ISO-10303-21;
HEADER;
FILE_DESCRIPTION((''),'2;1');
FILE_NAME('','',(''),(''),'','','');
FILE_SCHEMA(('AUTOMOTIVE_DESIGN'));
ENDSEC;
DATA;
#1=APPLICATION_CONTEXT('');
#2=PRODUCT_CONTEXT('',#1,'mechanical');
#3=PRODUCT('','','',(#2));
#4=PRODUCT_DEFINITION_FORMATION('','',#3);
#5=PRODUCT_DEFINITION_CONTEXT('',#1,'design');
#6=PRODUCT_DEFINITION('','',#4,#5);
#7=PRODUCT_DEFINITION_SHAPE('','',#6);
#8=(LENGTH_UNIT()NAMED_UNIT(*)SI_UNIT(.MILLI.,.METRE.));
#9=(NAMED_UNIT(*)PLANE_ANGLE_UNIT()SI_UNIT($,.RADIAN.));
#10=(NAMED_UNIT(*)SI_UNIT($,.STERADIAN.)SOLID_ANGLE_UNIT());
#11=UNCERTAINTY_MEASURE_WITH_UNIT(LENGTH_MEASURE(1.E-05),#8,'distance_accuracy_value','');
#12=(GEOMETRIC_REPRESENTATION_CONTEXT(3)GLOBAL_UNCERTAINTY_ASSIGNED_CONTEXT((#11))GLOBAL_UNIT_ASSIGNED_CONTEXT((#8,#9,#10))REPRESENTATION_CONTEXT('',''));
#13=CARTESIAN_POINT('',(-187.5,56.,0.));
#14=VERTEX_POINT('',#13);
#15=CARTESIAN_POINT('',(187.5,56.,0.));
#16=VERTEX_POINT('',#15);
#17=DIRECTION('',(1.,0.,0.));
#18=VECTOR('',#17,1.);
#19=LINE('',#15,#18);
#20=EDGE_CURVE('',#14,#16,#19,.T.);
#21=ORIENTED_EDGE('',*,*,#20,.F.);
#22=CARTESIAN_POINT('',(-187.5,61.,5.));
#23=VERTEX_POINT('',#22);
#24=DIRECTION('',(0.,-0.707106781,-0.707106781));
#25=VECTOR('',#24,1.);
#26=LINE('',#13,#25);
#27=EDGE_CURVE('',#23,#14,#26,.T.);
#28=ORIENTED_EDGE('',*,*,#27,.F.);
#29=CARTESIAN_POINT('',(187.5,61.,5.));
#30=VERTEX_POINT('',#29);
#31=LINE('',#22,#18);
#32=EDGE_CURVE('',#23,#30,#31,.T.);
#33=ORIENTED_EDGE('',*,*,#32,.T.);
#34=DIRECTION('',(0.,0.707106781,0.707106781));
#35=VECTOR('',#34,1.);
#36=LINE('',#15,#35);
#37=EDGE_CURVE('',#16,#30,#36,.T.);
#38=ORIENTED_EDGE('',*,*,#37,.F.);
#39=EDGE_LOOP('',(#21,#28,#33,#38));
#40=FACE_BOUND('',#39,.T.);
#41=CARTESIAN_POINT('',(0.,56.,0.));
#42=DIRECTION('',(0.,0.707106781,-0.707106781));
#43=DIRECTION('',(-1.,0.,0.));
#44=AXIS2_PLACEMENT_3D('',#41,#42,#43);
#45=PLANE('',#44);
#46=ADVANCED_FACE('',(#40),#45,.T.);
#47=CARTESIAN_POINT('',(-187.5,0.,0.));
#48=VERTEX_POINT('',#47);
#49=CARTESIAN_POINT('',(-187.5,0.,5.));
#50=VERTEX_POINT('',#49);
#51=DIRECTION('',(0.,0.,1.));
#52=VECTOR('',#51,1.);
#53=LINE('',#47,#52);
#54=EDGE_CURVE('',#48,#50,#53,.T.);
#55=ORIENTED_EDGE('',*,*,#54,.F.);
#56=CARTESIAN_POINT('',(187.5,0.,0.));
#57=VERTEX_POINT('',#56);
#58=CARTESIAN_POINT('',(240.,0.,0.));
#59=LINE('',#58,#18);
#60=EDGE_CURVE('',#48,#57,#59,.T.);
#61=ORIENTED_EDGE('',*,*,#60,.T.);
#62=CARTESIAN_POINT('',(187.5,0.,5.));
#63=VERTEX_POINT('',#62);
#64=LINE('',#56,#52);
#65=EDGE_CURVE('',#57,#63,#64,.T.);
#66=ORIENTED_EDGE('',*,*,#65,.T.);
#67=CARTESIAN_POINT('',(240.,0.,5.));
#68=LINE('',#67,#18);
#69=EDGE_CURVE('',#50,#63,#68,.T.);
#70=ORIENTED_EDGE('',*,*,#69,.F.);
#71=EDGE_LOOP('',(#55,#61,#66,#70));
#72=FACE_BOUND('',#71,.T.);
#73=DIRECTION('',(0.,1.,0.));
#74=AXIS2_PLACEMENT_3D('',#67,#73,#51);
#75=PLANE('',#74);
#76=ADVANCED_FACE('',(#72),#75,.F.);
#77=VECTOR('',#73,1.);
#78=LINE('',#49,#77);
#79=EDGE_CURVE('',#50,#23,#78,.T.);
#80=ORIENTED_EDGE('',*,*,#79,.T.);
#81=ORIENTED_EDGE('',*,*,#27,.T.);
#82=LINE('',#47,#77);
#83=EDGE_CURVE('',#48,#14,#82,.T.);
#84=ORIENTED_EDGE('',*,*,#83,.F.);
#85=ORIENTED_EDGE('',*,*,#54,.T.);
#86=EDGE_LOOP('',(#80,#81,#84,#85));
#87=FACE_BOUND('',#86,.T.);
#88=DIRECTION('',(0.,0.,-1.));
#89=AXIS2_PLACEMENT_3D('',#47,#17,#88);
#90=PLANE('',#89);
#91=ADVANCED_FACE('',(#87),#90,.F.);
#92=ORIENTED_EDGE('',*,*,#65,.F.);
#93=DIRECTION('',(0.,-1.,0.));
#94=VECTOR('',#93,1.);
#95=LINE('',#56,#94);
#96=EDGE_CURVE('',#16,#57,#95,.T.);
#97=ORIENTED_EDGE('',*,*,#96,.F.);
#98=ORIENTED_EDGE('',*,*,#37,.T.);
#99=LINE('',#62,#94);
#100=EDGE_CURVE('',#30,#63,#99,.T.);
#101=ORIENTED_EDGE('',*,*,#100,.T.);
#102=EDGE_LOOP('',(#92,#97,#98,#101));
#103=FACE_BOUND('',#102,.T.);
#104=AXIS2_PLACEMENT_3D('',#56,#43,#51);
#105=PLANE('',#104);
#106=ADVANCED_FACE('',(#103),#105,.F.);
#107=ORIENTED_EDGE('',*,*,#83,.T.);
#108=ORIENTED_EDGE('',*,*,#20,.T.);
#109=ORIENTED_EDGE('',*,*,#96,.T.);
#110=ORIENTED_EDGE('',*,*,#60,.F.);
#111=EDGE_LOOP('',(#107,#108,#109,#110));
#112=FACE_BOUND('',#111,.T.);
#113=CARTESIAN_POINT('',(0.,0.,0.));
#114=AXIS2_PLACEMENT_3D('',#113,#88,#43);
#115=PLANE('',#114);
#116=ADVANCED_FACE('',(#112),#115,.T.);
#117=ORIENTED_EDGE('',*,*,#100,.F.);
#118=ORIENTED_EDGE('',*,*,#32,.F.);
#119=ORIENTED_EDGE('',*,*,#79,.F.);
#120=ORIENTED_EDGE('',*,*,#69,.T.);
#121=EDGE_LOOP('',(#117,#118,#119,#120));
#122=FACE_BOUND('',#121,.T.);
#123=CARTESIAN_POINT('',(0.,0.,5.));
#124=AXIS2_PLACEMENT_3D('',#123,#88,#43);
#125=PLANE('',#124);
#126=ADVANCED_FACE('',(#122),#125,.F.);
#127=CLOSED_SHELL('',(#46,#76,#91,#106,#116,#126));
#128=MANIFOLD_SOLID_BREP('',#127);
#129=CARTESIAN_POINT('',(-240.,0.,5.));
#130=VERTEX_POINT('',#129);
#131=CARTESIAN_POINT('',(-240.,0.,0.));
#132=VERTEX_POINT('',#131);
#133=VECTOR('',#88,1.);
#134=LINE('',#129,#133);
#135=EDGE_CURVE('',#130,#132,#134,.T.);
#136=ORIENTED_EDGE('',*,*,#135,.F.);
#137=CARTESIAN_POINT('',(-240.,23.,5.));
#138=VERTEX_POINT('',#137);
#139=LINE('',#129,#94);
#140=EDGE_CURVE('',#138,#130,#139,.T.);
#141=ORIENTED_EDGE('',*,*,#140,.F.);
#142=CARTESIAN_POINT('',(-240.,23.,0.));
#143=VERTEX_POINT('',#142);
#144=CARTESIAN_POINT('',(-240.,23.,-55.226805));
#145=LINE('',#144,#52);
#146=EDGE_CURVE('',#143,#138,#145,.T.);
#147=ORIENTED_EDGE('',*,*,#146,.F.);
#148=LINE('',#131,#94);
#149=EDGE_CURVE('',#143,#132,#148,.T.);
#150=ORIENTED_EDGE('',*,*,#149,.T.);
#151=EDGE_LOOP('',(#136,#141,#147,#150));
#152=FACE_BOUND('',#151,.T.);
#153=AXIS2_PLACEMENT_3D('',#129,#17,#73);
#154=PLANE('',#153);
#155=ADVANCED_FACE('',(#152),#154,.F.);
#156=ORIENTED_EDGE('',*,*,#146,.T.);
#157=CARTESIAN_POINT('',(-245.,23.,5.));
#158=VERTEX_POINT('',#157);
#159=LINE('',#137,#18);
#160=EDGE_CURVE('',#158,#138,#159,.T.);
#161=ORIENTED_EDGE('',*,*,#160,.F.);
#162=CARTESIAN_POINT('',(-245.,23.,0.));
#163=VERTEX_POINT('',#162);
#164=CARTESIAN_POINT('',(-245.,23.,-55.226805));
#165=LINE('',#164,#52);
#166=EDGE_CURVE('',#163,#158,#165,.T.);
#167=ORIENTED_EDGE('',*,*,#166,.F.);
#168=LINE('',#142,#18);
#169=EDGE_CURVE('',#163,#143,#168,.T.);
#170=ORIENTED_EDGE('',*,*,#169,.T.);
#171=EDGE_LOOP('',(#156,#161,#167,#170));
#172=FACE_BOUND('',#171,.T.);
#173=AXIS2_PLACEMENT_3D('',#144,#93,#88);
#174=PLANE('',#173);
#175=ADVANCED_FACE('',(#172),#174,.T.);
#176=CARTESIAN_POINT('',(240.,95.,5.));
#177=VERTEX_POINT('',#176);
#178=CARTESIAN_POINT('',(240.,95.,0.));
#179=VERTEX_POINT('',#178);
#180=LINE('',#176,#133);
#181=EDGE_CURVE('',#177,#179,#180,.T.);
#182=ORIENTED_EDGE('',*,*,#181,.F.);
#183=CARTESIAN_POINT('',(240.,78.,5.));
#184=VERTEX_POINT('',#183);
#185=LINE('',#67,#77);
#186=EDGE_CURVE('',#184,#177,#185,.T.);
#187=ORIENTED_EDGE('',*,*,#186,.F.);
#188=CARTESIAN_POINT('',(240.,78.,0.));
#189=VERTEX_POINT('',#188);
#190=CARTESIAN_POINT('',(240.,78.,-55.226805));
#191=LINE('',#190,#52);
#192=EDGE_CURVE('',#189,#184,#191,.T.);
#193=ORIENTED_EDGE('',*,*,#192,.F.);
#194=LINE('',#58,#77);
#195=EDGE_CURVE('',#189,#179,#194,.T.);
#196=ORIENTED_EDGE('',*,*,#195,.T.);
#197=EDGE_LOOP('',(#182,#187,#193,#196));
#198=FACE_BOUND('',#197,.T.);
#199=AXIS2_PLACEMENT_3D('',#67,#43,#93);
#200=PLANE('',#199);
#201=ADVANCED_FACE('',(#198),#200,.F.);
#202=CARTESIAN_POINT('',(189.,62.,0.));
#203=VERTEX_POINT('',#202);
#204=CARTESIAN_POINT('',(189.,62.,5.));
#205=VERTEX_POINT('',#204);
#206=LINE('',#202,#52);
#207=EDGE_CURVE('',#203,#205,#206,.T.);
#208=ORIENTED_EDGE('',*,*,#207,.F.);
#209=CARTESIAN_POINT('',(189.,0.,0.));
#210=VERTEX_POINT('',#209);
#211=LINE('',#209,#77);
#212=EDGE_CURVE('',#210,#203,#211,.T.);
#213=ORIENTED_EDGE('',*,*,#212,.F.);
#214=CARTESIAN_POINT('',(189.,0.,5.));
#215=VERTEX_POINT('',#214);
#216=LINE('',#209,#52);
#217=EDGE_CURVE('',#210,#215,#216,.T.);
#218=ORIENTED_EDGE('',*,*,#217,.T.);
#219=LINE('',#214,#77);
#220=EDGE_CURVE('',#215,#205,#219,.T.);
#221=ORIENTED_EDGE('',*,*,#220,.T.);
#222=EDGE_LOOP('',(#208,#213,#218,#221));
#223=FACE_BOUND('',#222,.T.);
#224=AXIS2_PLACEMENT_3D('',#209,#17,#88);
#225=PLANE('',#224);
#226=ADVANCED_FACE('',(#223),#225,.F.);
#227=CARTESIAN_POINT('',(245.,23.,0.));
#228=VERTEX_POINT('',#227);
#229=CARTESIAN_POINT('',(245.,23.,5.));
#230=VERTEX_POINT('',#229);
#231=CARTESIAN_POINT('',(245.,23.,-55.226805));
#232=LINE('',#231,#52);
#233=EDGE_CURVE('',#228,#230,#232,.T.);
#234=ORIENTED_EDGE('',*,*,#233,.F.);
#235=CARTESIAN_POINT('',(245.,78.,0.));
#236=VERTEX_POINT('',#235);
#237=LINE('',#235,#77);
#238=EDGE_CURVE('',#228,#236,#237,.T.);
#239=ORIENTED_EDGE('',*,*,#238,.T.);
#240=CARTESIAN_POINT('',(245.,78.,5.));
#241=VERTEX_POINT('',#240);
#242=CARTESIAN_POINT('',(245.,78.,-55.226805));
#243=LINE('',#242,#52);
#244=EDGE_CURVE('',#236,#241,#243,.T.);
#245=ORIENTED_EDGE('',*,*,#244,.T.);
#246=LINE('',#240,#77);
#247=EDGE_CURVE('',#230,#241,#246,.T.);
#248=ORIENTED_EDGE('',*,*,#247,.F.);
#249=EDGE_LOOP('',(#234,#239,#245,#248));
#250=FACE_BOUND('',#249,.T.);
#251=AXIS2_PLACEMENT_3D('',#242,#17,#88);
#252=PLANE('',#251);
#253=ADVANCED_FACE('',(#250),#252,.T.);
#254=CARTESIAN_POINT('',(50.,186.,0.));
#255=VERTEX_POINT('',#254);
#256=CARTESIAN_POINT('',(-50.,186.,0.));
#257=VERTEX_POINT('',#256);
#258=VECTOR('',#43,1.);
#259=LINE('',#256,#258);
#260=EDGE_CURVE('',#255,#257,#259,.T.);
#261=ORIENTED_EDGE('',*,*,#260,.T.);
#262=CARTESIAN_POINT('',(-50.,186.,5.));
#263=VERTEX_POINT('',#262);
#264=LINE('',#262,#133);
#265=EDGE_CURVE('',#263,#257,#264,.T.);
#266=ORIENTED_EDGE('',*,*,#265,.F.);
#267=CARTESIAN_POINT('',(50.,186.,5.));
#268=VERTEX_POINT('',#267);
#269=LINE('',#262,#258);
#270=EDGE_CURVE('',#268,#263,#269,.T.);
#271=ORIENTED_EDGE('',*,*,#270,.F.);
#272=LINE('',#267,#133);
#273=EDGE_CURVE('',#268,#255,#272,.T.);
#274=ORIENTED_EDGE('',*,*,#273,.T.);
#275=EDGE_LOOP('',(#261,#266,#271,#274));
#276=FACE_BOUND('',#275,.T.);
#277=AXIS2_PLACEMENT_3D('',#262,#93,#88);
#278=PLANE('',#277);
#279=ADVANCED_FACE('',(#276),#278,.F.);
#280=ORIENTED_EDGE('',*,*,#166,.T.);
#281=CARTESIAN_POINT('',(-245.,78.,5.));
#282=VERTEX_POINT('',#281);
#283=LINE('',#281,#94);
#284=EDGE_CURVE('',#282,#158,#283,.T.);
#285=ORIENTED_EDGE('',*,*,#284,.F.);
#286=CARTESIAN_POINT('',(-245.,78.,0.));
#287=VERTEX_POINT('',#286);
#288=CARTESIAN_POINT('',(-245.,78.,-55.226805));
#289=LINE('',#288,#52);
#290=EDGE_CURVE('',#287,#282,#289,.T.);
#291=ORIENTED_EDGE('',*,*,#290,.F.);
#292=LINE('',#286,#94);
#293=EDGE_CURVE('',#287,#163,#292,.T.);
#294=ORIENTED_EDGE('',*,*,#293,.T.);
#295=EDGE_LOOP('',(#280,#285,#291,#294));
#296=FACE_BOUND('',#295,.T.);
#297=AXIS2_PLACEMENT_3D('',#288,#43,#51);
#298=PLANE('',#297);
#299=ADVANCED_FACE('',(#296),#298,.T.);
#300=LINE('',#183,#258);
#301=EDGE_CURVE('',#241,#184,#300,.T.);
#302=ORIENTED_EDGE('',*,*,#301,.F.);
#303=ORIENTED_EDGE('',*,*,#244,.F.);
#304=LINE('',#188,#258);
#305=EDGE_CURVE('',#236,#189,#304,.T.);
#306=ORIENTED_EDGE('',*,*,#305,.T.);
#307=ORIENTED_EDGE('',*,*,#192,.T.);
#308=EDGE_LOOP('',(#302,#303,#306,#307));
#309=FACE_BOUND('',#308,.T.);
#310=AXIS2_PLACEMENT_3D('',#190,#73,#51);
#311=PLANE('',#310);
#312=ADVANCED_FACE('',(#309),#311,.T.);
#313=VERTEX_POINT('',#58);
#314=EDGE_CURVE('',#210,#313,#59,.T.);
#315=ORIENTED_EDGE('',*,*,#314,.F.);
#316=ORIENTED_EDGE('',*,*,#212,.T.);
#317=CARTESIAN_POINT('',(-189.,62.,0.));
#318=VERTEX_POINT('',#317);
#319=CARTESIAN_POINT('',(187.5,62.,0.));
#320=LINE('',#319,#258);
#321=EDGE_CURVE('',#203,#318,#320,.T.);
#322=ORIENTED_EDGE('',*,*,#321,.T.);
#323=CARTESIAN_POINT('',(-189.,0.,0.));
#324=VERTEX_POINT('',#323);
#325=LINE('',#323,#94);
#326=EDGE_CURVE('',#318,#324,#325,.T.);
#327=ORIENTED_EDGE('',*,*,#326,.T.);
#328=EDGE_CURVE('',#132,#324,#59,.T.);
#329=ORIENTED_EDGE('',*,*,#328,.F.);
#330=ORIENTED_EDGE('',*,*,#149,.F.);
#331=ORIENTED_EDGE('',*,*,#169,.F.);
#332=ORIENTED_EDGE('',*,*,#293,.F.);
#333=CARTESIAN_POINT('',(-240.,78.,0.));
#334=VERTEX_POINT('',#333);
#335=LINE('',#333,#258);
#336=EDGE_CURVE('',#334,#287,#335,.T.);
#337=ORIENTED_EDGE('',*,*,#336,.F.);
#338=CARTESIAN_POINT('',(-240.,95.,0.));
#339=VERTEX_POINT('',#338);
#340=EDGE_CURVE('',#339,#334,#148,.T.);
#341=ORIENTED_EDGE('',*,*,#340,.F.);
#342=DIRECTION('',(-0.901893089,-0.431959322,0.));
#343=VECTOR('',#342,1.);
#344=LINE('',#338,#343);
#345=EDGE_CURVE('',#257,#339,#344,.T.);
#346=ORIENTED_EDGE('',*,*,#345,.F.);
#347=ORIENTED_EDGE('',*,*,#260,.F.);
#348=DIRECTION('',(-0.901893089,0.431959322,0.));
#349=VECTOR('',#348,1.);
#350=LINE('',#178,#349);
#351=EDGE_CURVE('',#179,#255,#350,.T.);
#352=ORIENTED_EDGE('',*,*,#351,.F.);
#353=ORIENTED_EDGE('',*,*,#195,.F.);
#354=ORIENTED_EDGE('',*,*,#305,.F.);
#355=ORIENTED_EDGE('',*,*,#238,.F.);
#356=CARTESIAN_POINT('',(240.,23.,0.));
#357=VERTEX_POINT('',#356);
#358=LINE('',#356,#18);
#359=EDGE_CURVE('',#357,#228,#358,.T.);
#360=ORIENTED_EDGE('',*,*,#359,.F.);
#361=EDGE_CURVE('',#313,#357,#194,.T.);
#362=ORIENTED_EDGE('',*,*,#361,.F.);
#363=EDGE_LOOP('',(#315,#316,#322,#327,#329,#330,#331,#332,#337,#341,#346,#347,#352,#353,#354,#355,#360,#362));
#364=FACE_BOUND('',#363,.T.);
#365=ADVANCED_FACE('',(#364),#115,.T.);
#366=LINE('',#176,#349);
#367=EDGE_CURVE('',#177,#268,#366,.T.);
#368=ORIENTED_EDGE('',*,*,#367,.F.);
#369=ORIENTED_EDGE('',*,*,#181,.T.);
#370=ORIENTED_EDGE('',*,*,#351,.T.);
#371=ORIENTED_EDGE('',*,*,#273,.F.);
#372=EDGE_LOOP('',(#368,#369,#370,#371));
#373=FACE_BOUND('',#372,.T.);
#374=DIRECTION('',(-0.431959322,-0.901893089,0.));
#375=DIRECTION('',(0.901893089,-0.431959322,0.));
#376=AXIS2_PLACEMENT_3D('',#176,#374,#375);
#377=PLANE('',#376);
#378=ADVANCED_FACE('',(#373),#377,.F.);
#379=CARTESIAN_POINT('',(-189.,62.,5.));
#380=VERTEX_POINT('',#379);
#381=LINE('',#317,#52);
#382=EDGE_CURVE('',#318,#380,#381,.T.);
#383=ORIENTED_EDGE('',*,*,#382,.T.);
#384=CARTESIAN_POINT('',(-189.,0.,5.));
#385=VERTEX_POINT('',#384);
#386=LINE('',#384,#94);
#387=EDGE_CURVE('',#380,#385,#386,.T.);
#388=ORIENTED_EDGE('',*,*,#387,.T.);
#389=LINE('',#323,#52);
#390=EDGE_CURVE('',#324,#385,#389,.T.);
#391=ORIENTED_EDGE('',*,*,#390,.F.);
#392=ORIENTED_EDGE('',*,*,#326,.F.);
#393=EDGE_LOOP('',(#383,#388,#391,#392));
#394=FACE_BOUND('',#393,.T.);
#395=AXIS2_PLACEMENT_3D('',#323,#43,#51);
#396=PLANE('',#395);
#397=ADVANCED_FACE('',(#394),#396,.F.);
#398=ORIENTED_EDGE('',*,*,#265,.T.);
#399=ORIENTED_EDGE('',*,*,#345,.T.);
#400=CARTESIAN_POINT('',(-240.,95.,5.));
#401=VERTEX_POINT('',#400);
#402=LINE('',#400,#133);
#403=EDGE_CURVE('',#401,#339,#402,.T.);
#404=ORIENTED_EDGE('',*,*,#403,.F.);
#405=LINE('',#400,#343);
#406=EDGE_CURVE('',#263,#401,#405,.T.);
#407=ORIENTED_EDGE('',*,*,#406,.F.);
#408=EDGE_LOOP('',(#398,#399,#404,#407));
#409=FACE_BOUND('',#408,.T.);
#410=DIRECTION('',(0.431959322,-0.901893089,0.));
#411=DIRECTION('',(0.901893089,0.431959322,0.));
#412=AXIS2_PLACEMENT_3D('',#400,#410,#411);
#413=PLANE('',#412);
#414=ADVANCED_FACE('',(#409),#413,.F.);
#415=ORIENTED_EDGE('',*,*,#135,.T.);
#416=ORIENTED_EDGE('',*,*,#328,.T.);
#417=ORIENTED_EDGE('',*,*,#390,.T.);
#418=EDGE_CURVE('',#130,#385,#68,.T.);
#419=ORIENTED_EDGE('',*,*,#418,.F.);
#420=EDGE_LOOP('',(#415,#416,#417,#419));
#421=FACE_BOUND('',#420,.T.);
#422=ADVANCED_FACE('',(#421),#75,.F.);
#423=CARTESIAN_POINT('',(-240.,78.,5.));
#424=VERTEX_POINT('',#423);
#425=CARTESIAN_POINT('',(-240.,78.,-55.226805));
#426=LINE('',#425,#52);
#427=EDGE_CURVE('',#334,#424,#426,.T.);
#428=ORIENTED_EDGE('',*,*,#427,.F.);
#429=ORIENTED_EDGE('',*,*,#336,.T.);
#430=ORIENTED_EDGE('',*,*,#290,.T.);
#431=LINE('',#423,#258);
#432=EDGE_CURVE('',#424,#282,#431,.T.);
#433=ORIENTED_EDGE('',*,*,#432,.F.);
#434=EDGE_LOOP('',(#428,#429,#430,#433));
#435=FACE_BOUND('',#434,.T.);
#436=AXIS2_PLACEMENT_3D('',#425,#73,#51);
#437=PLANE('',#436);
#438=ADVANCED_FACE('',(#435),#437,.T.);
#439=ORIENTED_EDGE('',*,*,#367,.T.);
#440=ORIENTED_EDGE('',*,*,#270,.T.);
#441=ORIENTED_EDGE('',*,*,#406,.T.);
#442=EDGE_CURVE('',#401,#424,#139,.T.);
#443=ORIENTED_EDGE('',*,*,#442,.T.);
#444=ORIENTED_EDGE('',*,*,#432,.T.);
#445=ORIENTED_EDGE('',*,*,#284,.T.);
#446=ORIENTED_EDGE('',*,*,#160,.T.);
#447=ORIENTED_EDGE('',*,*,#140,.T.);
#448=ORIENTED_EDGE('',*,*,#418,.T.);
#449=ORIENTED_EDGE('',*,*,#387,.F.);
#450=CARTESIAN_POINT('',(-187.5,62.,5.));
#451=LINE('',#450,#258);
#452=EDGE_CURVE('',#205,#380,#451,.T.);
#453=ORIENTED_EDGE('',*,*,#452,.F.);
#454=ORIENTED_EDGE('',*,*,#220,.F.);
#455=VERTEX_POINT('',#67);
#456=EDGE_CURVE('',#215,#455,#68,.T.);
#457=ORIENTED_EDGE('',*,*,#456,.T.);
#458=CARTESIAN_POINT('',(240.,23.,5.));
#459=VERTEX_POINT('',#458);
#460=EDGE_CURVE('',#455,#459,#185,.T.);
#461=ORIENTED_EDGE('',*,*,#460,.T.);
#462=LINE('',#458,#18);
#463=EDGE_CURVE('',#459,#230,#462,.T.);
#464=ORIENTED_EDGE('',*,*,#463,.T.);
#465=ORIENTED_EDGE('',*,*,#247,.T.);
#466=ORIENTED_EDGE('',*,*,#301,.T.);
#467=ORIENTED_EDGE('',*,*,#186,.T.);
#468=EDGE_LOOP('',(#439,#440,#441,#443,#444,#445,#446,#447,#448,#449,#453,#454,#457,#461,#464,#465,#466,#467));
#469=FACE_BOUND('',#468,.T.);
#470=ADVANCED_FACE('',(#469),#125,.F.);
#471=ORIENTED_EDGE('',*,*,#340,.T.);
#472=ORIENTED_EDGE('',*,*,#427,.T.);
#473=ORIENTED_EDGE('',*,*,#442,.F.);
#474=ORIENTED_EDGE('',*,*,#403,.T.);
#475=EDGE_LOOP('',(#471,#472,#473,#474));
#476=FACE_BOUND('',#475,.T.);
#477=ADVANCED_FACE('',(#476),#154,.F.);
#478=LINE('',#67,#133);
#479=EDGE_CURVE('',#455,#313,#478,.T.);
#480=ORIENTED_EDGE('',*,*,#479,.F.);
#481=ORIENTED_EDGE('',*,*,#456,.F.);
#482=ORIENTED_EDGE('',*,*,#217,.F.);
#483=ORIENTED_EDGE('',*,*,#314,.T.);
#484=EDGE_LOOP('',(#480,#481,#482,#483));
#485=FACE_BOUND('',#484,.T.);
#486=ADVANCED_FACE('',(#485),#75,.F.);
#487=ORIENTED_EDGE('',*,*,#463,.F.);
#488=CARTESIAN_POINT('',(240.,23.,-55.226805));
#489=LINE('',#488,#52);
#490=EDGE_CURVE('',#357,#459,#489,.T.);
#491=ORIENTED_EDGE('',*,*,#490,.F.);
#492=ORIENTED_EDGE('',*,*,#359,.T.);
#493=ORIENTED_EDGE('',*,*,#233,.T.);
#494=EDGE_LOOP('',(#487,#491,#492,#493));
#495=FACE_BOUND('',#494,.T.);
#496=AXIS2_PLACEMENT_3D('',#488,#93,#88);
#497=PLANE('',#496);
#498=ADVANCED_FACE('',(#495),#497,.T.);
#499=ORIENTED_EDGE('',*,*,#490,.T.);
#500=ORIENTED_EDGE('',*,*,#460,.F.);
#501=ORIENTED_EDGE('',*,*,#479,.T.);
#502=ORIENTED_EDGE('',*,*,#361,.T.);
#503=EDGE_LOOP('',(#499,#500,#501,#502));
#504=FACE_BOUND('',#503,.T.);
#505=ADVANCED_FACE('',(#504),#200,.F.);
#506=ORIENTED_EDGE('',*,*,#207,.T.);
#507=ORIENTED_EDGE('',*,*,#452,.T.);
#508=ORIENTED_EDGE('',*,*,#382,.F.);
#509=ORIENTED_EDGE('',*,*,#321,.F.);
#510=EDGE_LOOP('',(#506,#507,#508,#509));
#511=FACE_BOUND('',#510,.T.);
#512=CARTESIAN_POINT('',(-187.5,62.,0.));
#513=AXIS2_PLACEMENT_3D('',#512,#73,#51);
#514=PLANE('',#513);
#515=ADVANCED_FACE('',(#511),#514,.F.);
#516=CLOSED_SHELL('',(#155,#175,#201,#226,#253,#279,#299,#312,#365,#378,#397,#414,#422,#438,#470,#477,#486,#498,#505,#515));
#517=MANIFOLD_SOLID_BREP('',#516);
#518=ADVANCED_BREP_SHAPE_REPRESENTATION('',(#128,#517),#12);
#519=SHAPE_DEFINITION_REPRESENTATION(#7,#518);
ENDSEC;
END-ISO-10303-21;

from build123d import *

# Parameters (mm, degrees)
GRUNDFL_CHE_DEPTH          = 5
SKIZZE3_W                  = 5
SKIZZE3_H                  = 55
ZAPFENSEITENLEITWERK_DEPTH = 5
H_HENLEITWERK_DEPTH        = 308.645900346
FASE1_SIZE                 = 5


with BuildPart() as part:
    # Skizze1 → Grundfläche (new body)
    with BuildSketch(Plane.XY):
        Polygon((240, 0), (-240, 0), (-240, 95), (-50, 186), (50, 186), (240, 95), align=None)
    extrude(amount=GRUNDFL_CHE_DEPTH)

    # Skizze3 → ZapfenSeitenleitwerk (add)
    with BuildSketch(Plane.XY.offset(5)):
        with Locations((242.5, 50.5)):
            Rectangle(SKIZZE3_W, SKIZZE3_H)
        with Locations((-242.5, 50.5)):
            Rectangle(SKIZZE3_W, SKIZZE3_H)
    extrude(amount=-ZAPFENSEITENLEITWERK_DEPTH)

    # Skizze4 → Höhenleitwerk (cut, through all)
    with BuildSketch(Plane.XY.offset(5)):
        Polygon((-187.5, 0), (-189, 0), (-189, 62), (-187.5, 62), (187.5, 62), (189, 62), (189, 0), (187.5, 0), (187.5, 61), (-187.5, 61), align=None)
    extrude(amount=-H_HENLEITWERK_DEPTH, mode=Mode.SUBTRACT)


with BuildPart() as h_henleitwerk_piece_1:
    # of the separate pieces the step leaves, piece 1, a body of its own (h_henleitwerk_pieces)
    add(part.part.solids().sort_by_distance((240, 0, 0))[0])


with BuildPart() as h_henleitwerk_piece_2:
    # of the separate pieces the step leaves, piece 2, a body of its own (h_henleitwerk_pieces)
    add(part.part.solids().sort_by_distance((187.5, 0, 0))[0])

    # Fase1
    fase1_edges = [h_henleitwerk_piece_2.edges().sort_by_distance(p)[0] for p in [
        (0, 61, 0),
    ]]
    chamfer(fase1_edges, length=FASE1_SIZE - 0.0001)  # a hair under: the kernel refuses the full size


solid = Compound([h_henleitwerk_piece_1.part, h_henleitwerk_piece_2.part])
